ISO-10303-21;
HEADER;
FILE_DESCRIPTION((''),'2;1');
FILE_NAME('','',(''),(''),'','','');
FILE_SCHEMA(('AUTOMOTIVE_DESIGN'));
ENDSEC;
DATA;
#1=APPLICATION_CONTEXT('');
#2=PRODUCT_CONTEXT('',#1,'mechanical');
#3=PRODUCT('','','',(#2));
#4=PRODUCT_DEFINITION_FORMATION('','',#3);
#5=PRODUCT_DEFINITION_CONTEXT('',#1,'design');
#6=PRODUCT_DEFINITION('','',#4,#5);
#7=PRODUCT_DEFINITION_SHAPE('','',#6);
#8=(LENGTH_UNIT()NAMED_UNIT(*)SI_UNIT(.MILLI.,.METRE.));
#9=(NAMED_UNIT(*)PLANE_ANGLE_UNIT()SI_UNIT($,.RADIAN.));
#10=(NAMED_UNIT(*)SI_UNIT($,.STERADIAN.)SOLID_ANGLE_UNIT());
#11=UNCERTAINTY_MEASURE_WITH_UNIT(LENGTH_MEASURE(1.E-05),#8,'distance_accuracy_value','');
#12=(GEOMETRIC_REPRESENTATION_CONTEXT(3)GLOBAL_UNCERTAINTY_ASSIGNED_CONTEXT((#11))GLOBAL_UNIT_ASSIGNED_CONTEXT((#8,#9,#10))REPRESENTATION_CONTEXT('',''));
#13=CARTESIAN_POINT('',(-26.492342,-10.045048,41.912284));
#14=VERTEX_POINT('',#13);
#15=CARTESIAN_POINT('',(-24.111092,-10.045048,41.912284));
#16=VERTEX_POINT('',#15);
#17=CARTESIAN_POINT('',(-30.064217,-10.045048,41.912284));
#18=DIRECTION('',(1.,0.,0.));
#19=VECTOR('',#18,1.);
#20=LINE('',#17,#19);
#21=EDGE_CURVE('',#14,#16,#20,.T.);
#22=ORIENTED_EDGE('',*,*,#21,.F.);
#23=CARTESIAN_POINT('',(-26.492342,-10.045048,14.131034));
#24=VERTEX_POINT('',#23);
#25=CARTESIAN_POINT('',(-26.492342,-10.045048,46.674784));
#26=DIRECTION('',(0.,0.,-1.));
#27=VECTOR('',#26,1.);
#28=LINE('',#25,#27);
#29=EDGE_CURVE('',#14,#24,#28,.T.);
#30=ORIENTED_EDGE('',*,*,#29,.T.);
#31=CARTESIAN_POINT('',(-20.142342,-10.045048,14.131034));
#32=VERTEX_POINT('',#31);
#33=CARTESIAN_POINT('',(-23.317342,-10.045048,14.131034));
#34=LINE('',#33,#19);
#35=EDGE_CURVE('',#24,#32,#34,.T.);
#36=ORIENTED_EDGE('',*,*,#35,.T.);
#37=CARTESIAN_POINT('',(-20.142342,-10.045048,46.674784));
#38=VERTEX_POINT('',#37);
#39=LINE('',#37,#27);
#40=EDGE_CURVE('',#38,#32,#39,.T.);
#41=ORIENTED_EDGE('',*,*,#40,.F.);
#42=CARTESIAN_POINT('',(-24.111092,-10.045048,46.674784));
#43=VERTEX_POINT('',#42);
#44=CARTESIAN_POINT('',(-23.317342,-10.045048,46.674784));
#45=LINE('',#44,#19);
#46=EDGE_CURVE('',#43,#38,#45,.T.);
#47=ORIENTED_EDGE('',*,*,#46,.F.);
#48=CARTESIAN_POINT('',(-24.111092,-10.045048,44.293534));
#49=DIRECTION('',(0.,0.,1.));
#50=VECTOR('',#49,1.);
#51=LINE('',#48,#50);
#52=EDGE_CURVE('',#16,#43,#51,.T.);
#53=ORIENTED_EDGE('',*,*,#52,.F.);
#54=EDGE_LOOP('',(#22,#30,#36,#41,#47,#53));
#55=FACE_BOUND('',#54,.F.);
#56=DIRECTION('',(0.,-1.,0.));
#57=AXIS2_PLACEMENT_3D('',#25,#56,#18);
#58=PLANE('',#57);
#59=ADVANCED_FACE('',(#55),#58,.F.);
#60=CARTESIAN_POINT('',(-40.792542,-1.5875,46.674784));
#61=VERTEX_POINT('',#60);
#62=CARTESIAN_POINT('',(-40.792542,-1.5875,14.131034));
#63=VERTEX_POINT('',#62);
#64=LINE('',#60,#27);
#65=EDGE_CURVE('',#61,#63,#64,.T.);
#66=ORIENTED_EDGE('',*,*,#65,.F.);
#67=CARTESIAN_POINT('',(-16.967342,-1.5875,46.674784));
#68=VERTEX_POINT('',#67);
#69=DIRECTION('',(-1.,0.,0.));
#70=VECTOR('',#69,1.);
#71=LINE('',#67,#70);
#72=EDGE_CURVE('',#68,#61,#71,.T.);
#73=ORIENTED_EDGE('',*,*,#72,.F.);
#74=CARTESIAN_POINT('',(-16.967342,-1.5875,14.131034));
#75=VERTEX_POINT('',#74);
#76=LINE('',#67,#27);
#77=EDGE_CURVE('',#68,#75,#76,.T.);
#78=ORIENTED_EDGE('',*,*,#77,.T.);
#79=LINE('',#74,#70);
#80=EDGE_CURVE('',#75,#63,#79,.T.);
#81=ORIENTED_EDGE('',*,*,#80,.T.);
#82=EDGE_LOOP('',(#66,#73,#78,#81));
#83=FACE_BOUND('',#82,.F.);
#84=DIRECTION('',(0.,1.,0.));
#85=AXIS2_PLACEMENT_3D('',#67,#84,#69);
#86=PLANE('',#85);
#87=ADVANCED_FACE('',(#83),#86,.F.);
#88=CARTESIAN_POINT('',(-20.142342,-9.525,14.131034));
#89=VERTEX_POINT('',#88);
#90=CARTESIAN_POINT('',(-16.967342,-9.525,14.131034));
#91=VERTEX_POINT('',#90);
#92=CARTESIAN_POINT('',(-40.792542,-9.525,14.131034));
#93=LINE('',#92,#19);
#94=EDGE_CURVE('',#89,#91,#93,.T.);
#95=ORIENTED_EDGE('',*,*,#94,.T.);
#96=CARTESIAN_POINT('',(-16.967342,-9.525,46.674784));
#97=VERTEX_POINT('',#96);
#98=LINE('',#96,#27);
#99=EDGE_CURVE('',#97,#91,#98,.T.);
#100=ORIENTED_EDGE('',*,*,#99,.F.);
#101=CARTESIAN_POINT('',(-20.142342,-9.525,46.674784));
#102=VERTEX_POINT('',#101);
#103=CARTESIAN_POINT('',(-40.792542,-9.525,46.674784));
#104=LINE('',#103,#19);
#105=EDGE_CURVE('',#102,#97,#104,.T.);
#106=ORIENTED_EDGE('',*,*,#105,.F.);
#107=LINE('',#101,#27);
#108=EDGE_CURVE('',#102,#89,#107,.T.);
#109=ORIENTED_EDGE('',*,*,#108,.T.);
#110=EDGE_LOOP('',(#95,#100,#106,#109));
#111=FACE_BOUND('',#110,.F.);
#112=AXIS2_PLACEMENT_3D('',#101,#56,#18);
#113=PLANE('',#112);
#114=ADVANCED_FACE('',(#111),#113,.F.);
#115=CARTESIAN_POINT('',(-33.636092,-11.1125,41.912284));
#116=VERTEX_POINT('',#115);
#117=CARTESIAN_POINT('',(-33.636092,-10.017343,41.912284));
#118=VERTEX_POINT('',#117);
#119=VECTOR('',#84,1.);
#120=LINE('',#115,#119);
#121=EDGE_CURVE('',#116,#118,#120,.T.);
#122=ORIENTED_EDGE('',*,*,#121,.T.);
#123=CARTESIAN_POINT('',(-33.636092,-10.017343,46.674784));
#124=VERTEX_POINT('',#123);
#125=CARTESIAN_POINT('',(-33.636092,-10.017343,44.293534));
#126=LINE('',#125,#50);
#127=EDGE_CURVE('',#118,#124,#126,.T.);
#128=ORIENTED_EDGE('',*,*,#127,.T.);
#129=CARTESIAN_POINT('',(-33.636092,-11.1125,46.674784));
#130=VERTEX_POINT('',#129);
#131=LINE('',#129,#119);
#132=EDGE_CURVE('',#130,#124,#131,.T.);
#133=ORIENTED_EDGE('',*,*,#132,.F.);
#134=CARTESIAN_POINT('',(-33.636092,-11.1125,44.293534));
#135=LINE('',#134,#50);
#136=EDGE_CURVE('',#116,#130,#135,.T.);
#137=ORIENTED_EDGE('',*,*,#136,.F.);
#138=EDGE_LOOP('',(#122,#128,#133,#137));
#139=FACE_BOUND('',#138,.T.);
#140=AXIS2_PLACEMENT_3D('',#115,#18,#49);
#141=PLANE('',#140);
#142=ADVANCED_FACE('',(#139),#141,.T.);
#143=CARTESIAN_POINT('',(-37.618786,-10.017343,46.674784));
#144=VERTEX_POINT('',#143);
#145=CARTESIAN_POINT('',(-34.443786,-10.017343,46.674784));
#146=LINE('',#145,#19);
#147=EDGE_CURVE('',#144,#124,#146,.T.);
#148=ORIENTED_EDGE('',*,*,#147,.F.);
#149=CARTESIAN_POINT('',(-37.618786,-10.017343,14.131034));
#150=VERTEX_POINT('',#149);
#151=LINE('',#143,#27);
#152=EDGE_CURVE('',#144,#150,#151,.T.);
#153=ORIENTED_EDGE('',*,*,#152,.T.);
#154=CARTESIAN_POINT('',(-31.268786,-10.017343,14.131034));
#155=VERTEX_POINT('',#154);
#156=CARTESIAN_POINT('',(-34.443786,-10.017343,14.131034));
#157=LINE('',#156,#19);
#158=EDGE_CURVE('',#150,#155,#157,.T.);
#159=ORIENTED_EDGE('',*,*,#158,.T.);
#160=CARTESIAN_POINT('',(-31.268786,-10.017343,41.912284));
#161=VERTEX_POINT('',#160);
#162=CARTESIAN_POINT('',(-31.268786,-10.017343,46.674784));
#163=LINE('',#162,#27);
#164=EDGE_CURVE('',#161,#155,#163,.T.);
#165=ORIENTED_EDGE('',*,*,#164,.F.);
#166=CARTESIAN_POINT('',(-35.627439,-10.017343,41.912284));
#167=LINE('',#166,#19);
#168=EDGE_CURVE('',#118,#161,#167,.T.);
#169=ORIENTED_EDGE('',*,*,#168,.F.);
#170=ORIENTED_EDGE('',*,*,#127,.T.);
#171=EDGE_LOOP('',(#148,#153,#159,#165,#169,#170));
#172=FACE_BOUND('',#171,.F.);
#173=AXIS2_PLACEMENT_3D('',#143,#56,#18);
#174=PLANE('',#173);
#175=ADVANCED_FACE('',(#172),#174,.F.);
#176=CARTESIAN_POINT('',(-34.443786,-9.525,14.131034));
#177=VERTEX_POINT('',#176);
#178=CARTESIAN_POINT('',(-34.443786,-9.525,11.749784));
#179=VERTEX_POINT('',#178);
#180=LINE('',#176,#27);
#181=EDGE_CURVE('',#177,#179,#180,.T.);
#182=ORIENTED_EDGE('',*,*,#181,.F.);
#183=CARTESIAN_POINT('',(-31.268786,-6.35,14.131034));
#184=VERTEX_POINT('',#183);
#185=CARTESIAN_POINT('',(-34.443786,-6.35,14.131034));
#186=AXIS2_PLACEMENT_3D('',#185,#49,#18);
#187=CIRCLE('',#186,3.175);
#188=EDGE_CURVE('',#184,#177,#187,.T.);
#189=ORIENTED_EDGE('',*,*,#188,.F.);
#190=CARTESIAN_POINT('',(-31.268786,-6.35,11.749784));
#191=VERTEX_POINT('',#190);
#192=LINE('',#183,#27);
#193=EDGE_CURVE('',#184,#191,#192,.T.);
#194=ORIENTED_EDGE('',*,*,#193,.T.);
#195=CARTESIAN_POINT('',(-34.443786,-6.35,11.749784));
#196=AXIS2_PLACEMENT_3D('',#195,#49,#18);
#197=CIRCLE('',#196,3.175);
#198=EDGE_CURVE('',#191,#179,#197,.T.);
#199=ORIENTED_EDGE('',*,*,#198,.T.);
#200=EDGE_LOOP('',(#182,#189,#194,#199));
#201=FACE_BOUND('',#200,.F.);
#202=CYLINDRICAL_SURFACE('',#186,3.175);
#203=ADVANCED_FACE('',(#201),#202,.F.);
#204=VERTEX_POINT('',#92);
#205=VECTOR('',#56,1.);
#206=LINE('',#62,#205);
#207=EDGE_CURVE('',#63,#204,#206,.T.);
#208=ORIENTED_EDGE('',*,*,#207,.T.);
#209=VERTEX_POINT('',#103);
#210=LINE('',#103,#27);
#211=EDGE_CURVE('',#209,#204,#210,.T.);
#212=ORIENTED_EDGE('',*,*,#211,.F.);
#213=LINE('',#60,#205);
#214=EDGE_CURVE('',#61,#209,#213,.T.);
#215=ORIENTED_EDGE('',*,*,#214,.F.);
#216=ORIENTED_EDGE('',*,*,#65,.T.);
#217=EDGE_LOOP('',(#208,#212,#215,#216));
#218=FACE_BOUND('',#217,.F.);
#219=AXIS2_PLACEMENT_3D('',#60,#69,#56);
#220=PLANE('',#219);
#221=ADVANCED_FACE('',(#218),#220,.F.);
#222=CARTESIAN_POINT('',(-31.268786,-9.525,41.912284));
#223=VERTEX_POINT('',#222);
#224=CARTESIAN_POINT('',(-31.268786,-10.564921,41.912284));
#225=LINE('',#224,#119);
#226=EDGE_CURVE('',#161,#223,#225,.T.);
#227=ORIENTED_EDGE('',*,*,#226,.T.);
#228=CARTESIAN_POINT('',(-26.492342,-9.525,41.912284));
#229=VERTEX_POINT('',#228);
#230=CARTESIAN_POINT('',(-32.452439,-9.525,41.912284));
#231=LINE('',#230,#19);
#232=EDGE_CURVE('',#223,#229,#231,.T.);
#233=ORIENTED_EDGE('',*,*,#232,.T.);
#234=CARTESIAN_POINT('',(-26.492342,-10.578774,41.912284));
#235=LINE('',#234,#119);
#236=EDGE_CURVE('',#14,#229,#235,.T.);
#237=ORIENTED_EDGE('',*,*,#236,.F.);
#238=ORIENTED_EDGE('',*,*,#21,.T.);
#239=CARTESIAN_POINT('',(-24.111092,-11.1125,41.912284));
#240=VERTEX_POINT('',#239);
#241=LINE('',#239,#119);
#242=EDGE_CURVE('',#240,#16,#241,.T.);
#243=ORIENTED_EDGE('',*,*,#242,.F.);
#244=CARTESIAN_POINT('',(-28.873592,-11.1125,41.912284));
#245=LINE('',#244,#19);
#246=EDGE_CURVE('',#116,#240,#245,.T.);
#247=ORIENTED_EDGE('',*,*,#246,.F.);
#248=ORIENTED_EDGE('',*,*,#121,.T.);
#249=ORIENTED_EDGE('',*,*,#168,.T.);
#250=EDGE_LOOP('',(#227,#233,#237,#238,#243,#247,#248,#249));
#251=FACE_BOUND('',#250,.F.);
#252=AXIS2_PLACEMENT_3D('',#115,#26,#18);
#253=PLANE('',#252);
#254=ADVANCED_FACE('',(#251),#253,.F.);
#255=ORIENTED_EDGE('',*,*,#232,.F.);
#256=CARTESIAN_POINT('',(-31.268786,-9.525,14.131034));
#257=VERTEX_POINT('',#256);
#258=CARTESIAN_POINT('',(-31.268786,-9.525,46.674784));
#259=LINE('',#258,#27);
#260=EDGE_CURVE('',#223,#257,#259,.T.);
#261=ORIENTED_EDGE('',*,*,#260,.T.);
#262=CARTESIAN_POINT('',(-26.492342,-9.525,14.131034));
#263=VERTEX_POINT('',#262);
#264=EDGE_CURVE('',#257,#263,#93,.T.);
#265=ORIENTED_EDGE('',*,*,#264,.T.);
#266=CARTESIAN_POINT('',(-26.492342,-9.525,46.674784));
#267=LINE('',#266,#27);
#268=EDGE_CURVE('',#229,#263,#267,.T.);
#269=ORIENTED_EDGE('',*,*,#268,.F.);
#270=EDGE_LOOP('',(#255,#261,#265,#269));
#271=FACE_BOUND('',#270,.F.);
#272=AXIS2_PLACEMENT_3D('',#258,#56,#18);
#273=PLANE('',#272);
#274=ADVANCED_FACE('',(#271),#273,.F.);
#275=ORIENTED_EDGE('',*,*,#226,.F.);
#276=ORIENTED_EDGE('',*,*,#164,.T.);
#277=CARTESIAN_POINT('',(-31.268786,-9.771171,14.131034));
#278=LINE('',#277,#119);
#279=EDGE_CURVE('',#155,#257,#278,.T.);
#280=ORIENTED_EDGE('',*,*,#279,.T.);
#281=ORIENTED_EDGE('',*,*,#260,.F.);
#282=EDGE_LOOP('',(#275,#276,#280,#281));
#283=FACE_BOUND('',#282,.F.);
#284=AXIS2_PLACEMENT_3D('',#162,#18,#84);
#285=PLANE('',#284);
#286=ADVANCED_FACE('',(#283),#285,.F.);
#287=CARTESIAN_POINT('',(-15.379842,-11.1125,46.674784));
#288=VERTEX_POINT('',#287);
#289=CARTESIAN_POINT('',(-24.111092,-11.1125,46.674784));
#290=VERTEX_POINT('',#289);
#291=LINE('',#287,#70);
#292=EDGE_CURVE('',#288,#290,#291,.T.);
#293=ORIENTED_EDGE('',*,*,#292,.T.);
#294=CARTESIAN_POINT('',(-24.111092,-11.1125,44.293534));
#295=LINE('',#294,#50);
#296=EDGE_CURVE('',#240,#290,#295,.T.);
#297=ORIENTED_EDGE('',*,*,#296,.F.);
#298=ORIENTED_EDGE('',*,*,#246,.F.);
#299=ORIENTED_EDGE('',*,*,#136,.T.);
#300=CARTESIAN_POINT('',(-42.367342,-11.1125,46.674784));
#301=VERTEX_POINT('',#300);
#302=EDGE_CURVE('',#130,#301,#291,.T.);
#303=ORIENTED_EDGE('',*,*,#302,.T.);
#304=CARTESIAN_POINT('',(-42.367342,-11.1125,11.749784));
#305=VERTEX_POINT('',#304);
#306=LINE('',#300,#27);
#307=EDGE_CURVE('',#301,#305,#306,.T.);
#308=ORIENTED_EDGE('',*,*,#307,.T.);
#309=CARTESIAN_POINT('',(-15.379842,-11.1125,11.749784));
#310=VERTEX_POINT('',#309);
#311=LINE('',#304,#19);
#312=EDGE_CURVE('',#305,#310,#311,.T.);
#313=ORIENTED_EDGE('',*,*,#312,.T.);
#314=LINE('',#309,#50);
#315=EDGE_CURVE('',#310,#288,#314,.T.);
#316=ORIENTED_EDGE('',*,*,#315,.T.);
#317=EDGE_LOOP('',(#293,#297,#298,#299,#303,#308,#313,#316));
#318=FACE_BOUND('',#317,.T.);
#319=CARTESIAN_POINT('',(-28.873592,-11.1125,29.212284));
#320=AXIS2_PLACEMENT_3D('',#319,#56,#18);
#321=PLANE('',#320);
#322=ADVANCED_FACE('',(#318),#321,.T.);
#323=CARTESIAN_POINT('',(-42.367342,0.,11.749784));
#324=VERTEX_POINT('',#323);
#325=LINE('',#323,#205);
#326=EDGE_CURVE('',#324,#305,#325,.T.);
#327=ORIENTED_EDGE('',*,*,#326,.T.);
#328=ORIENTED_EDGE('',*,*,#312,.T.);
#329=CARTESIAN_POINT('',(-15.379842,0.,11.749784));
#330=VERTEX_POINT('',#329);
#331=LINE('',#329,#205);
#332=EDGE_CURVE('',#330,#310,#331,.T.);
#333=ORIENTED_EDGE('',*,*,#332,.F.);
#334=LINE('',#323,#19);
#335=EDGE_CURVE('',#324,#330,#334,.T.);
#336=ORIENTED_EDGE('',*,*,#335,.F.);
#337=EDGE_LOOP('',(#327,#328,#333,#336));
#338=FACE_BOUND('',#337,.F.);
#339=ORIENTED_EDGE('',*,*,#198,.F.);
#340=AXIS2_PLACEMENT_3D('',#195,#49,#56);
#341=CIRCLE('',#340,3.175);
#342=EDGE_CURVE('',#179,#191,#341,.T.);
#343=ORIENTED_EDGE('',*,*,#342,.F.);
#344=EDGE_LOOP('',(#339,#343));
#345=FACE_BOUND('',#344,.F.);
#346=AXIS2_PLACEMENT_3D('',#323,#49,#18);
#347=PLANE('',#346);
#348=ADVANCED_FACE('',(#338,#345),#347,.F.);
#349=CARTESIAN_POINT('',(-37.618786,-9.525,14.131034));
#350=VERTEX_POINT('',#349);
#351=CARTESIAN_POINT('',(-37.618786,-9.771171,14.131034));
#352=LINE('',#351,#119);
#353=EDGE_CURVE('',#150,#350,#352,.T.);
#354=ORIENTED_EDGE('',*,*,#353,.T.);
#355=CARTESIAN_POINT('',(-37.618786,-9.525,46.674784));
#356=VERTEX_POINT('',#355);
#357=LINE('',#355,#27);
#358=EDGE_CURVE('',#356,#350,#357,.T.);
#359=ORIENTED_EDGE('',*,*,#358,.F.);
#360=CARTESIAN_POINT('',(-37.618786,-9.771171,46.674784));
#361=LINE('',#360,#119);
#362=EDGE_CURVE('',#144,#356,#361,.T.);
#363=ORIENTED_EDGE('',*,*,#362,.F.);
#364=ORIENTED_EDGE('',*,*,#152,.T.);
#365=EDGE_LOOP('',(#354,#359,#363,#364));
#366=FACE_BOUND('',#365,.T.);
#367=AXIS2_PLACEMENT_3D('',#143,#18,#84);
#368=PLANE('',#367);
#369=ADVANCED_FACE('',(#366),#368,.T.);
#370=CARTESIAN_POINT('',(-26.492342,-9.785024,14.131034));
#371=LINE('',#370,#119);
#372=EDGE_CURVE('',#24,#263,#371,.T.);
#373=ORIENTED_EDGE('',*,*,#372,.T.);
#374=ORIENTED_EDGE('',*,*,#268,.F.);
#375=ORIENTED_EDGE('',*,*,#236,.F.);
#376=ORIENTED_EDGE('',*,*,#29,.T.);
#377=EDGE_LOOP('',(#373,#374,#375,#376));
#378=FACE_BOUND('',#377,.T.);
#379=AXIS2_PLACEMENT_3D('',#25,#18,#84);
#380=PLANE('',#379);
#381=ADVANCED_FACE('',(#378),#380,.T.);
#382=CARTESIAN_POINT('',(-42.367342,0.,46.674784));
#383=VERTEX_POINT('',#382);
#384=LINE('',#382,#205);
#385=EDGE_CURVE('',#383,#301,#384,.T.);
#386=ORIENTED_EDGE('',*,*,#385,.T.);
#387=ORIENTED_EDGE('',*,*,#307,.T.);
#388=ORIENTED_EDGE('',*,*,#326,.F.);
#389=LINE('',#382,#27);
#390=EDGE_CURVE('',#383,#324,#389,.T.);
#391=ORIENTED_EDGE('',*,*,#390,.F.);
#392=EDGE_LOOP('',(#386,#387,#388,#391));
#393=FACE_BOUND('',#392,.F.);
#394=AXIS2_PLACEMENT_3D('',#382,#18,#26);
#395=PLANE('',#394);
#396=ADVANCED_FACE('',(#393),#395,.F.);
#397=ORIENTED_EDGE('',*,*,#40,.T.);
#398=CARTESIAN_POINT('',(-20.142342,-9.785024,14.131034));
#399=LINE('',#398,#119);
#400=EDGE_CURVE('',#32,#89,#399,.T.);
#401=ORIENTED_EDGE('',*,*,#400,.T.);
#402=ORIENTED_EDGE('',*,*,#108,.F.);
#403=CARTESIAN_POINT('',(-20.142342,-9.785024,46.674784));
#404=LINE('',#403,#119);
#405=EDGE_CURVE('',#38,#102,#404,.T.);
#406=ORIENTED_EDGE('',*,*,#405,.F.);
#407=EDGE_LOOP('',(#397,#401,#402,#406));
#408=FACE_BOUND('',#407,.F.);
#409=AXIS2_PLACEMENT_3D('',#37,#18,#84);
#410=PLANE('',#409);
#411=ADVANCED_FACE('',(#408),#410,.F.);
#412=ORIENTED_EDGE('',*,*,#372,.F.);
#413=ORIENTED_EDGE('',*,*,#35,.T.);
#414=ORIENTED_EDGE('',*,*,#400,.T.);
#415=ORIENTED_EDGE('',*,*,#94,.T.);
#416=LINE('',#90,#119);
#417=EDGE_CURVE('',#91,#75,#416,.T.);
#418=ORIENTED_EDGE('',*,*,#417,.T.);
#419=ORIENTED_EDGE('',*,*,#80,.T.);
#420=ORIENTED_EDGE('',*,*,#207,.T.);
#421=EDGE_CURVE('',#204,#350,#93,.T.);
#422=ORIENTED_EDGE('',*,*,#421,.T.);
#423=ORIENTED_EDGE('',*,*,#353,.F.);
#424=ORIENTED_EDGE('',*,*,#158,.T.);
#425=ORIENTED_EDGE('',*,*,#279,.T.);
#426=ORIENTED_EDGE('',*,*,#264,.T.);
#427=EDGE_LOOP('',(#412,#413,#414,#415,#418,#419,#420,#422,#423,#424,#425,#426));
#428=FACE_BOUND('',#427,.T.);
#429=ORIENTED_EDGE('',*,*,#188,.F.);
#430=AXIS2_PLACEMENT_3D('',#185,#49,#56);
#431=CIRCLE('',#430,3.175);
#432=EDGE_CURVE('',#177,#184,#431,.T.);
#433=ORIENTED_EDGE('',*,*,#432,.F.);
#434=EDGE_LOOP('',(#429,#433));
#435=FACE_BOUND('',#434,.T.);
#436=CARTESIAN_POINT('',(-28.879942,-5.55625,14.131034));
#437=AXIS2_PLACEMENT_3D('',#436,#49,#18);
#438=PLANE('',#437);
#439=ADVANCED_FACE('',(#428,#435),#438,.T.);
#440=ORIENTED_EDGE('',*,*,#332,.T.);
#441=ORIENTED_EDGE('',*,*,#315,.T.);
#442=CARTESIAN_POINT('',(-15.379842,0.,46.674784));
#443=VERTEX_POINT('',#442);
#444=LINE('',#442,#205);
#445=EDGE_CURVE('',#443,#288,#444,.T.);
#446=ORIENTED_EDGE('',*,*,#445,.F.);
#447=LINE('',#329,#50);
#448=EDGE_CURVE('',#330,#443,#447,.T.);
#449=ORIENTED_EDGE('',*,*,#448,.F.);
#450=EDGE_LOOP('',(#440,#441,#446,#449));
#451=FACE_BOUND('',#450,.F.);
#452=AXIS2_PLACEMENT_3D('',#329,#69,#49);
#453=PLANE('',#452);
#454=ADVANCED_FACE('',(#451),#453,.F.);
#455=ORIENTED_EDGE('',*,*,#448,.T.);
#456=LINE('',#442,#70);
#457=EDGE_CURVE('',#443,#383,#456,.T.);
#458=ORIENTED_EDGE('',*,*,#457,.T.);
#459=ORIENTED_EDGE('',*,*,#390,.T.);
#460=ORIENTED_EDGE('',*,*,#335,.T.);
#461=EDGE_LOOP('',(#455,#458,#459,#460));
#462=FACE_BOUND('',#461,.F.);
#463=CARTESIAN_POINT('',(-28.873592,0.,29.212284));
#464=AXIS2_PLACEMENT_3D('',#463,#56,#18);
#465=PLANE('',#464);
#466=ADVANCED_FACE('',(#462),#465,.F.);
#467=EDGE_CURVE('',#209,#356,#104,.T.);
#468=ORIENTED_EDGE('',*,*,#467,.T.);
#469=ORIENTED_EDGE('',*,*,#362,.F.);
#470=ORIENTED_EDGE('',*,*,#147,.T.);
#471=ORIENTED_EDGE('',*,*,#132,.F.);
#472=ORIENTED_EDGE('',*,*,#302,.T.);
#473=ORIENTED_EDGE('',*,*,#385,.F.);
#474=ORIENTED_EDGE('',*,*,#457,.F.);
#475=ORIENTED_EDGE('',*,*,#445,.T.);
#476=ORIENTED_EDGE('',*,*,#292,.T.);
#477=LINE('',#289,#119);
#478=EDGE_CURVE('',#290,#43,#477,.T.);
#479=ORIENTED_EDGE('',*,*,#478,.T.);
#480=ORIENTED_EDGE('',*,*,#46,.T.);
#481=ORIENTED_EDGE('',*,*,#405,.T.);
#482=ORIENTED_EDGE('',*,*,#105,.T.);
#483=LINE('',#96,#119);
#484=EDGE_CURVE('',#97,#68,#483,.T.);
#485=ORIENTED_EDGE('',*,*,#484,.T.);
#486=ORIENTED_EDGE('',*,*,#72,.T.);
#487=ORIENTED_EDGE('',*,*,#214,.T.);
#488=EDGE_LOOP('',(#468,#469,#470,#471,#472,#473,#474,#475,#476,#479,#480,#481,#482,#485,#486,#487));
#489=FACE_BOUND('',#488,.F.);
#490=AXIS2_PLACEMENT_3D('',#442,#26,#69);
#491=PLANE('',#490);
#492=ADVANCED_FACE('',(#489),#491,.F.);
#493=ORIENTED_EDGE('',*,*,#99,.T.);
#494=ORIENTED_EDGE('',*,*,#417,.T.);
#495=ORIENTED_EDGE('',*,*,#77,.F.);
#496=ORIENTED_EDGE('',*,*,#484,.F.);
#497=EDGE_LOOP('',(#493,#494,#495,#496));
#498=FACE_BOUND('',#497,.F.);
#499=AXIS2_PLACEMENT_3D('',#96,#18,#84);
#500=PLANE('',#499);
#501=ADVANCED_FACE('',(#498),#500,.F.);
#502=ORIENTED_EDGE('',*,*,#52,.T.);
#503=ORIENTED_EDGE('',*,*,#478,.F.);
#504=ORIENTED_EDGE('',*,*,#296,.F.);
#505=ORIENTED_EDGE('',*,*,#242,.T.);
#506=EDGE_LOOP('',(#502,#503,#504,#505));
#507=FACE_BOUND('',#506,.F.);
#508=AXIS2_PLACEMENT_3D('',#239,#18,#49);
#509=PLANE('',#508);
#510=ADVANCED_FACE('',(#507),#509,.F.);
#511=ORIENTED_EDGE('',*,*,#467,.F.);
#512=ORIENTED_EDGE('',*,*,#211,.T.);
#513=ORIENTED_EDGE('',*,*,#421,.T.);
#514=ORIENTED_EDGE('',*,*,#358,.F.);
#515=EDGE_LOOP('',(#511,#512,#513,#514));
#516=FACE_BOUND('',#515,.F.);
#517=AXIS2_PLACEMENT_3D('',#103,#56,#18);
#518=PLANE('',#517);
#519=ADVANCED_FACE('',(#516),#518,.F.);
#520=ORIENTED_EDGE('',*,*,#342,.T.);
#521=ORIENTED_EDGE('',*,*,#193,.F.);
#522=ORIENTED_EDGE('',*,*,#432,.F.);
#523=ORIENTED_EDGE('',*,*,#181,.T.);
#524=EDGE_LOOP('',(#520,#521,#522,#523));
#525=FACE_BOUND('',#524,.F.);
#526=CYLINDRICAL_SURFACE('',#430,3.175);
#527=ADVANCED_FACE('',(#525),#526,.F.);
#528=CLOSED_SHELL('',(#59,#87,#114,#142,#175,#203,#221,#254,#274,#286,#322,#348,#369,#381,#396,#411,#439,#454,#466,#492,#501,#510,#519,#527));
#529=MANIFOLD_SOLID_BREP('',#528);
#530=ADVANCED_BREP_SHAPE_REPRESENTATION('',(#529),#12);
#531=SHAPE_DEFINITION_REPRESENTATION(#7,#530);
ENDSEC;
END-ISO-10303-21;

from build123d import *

# Parameters (mm, degrees)
F1_DEPTH = 11.1125
F2_W     = 6.35
F2_H     = 0.5200478494
F2_H_2   = 0.4923428655
F3_DEPTH = 32.54375
F5_DEPTH = 2.38225
F6_W     = 9.525
F6_H     = 4.7625
F7_DEPTH = 3.175


# Not quite as in the source:
# - a feature names something its author has since deleted; it is built from what else it names


with BuildPart() as f1:
    # F0 (on Front) → F1 (new body)
    with BuildSketch(Plane.XZ):
        Polygon((-30.725677704, 46.6747839019), (-42.3673422778, 46.6747839019), (-42.3673422778, 11.7497839019), (-15.3798422778, 11.7497839019), (-15.3798422778, 46.6747839019), align=None)
    extrude(amount=F1_DEPTH)

    # F2 (on face) → F3 (cut)
    with BuildSketch(Plane.XY.offset(46.6747839019)):
        Polygon((-16.9673422778, -9.525), (-16.9673422778, -1.5875), (-20.1423422778, -1.5875), (-40.7925422778, -1.5875), (-40.7925422778, -9.525), (-37.6187860966, -9.525), (-31.2687860966, -9.525), (-26.4923422778, -9.525), (-20.1423422778, -9.525), align=None)
        with Locations((-23.3173422778, -9.7850239247)):
            Rectangle(F2_W, F2_H)
        with Locations((-34.4437860966, -9.7711714327)):
            Rectangle(F2_W, F2_H_2)
    extrude(amount=-F3_DEPTH, mode=Mode.SUBTRACT)

    # F4 (on face) → F5 (cut, through all)
    with BuildSketch(Plane.XY.offset(14.1310339019)):
        with BuildLine():
            ThreePointArc((-34.4437860966, -9.525), (-32.1987220663, -8.5950640303), (-31.2687860966, -6.35))
            ThreePointArc((-31.2687860966, -6.35), (-36.6888501268, -4.1049359697), (-34.4437860966, -9.525))
        make_face()
    extrude(amount=-F5_DEPTH, mode=Mode.SUBTRACT)

    # F6 (on face) → F7 (cut)
    with BuildSketch(Plane.XZ.offset(11.1125)):
        with Locations((-28.8735922778, 44.2935339019)):
            Rectangle(F6_W, F6_H)
    extrude(amount=-F7_DEPTH, mode=Mode.SUBTRACT)


solid = f1.part
